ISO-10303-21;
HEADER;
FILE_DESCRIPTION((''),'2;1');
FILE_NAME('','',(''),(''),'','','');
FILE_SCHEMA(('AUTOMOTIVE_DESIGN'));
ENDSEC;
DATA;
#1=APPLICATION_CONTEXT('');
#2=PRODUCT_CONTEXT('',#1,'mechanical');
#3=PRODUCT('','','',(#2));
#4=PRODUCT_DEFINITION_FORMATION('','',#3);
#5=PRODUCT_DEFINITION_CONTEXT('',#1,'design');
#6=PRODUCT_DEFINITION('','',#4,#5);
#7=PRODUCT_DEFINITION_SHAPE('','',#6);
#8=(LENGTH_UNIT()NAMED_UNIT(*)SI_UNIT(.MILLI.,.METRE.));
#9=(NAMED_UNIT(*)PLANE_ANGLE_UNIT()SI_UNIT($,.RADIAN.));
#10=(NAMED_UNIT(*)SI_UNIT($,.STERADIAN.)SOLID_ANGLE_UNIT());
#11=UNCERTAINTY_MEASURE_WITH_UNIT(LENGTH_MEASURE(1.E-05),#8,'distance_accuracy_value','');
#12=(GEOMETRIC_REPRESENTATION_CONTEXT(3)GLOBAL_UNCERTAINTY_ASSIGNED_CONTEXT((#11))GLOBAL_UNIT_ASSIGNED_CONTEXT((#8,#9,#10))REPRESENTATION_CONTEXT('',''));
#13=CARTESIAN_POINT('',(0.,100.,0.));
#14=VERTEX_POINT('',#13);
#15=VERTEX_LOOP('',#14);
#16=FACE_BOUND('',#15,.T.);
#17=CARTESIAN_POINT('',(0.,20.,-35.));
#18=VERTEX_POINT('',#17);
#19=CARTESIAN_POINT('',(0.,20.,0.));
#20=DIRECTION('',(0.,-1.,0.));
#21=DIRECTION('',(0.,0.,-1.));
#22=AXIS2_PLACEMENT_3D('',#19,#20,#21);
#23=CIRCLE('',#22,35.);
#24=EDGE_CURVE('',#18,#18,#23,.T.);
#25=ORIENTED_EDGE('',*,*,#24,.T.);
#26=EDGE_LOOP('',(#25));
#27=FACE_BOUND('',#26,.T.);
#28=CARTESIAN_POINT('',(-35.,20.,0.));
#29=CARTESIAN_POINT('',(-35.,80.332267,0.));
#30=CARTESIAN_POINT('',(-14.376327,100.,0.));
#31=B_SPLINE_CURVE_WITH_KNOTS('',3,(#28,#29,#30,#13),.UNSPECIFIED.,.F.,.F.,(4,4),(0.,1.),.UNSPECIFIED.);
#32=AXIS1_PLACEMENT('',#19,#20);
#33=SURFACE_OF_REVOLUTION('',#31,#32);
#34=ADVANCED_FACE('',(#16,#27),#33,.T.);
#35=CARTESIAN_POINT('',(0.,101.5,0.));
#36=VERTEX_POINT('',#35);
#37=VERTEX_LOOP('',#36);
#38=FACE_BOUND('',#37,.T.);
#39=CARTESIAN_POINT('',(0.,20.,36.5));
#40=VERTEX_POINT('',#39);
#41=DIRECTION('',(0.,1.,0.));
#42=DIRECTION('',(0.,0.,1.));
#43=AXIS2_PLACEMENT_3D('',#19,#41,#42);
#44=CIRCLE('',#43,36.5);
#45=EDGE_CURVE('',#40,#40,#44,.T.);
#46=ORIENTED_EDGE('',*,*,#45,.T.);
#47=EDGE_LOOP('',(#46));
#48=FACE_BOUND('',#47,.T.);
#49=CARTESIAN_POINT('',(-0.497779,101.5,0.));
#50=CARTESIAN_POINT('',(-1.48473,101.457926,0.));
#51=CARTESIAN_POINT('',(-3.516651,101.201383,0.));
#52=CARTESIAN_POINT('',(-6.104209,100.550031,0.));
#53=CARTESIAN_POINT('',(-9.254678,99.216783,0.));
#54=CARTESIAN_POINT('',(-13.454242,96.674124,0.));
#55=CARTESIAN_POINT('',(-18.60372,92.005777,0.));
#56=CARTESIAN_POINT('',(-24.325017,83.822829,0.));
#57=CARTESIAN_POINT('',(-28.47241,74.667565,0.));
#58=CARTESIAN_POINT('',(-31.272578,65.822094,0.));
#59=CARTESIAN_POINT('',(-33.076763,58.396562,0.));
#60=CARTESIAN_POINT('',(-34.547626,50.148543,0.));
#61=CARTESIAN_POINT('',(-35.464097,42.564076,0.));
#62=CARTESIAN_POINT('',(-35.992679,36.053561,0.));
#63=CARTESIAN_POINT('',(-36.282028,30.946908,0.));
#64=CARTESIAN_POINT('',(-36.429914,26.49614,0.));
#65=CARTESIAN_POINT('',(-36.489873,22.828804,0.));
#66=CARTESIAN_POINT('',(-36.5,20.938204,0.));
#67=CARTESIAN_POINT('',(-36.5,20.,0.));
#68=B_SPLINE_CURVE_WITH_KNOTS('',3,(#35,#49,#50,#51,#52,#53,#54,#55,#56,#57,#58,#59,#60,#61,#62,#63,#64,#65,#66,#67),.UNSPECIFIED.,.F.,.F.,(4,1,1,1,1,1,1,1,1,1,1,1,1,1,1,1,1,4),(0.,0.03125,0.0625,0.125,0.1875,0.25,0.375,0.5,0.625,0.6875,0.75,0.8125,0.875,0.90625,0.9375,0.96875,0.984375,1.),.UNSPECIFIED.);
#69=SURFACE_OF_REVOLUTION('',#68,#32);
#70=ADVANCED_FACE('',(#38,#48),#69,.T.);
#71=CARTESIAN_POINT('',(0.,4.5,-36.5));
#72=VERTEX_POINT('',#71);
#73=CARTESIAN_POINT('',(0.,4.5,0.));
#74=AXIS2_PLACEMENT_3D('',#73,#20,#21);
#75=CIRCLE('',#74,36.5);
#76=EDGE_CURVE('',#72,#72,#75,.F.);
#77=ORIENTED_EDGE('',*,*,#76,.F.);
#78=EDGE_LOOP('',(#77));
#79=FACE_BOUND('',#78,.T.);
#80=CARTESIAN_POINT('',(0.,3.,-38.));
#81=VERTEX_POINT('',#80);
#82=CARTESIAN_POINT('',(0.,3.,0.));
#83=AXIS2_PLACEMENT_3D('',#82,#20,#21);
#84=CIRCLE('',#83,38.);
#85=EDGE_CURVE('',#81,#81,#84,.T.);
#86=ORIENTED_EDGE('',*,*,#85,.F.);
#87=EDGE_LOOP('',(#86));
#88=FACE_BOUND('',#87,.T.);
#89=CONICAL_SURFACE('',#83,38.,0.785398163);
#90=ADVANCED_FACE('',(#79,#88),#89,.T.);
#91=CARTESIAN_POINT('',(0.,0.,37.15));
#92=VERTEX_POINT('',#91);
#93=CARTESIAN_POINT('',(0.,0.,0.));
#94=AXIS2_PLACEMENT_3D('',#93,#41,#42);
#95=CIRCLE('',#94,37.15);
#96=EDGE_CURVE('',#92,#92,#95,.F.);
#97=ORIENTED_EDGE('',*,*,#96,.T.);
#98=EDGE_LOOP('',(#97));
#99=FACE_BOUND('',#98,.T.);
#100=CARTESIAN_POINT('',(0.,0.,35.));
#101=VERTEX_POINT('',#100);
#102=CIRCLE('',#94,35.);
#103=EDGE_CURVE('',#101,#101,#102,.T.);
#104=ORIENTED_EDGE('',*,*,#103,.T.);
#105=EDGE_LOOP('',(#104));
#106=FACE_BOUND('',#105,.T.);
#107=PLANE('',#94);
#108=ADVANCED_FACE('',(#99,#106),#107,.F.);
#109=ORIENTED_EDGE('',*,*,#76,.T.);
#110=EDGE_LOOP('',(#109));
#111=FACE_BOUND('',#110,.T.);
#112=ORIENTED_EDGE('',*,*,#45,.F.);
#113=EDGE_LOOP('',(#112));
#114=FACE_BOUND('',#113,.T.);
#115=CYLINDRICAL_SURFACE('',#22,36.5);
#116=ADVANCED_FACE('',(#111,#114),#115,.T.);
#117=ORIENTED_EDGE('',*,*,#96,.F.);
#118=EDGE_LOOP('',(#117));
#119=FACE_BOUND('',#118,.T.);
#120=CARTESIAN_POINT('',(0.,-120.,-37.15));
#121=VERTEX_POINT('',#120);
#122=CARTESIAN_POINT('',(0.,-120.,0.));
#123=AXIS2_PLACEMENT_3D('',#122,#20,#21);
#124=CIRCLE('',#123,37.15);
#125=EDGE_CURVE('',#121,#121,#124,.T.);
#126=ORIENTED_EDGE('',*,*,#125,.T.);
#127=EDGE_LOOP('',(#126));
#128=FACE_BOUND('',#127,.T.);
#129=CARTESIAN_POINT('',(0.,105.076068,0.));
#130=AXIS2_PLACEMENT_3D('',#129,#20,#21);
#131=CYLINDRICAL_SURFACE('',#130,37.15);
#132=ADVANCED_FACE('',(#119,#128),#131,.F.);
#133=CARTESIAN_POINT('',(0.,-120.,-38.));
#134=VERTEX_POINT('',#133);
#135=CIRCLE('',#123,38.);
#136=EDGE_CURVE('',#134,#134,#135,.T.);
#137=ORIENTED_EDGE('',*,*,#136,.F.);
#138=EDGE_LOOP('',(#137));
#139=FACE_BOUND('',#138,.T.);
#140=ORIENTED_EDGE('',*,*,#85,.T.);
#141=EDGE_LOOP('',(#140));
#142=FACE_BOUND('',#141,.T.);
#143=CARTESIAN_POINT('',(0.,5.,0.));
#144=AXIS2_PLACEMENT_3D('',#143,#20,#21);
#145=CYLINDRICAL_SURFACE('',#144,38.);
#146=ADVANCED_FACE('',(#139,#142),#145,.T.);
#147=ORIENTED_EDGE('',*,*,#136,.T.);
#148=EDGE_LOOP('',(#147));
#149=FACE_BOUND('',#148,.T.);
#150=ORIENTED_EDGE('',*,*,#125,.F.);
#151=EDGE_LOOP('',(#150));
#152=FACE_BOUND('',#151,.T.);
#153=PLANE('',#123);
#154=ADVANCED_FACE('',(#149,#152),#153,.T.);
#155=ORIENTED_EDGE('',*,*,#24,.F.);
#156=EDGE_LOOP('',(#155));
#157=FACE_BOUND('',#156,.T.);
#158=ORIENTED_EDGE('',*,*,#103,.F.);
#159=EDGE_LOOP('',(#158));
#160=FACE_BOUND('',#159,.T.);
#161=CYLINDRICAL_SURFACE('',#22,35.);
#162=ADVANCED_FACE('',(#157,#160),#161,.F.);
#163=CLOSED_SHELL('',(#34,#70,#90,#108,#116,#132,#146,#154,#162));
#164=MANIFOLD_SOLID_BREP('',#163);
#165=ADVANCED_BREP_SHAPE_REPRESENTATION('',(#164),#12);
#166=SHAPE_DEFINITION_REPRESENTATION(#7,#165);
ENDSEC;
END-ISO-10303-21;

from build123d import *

# Parameters (mm, degrees)
SKETCH1_R                = 36.5
SKETCH1_R_2              = 35
BOSS_EXTRUDE1_DEPTH      = 20
BOSS_EXTRUDE2_DEPTH      = 120
BOSS_EXTRUDE2_DEPTH_BACK = 5
SKETCH3_R                = 38
SKETCH3_R_2              = 36.5
CHAMFER1_SIZE            = 2
SKETCH4_R                = 37.15
CUT_EXTRUDE1_DEPTH       = 120


with BuildPart() as part:
    # Sketch1 → Boss-Extrude1 (new body)
    with BuildSketch(Plane(origin=(0, 0, 0), x_dir=(1, 0, 0), z_dir=(0, 1, 0))):
        with Locations(Location((0, 0, 0), (0, 0, 270))):
            Circle(SKETCH1_R)
        with Locations(Location((0, 0, 0), (0, 0, 270))):
            Circle(SKETCH1_R_2, mode=Mode.SUBTRACT)
    extrude(amount=BOSS_EXTRUDE1_DEPTH)

    # Sketch2 → Revolve1 (revolve)
    with BuildSketch(Plane.XY, mode=Mode.PRIVATE) as revolve1_sk:
        with BuildLine():
            Line((-35, 20), (-36.5, 20))
            add(Edge.make_bspline(
                [(-36.5, 20), (-36.5, 20.938203754), (-36.489872815, 22.828803886), (-36.429914329, 26.496139533), (-36.282028405, 30.946908345), (-35.992678983, 36.053561075), (-35.464097096, 42.564076378), (-34.547626097, 50.148542942), (-33.076762757, 58.396561812), (-31.272577792, 65.822093819), (-28.472409657, 74.667565146), (-24.325017143, 83.822828988), (-18.603719652, 92.00577673), (-13.454241979, 96.674123666), (-9.254678436, 99.216783088), (-6.104208908, 100.550031186), (-3.516650787, 101.201383216), (-1.484729716, 101.45792619), (-0.497779404, 101.5), (0, 101.5)],
                knots=[0, 0, 0, 0, 0.015625, 0.03125, 0.0625, 0.09375, 0.125, 0.1875, 0.25, 0.3125, 0.375, 0.5, 0.625, 0.75, 0.8125, 0.875, 0.9375, 0.96875, 1, 1, 1, 1], degree=3))
            Line((0, 101.5), (0, 100))
            add(Edge.make_bspline(
                [(-35, 20), (-35, 80.332266649), (-14.376326679, 100), (0, 100)],
                knots=[0, 0, 0, 0, 1, 1, 1, 1], degree=3))
        make_face()
    revolve(revolve1_sk.sketch.rotate(Axis((0, 20, 0), (0, 1, 0)), 270), axis=Axis((0, 20, 0), (0, 1, 0)))

    # Sketch3 → Boss-Extrude2 (add, two sides: drawn at the far end of the back side and taken through both)
    with BuildSketch(Plane.XZ.offset(-BOSS_EXTRUDE2_DEPTH_BACK)):
        with Locations(Location((0, 0, 0), (0, 0, 270))):
            Circle(SKETCH3_R)
        with Locations(Location((0, 0, 0), (0, 0, 270))):
            Circle(SKETCH3_R_2, mode=Mode.SUBTRACT)
    extrude(amount=BOSS_EXTRUDE2_DEPTH + BOSS_EXTRUDE2_DEPTH_BACK)

    # Chamfer1
    # the kernel refuses this chamfer: 2 mm, written as the material it takes off along each edge
    with BuildSketch(Plane(origin=(0, 5, 0), x_dir=(0, 0, -1), z_dir=(-1, 0, 0))) as chamfer1_piece_1_section:
        Polygon((38 - CHAMFER1_SIZE, 0), (38, CHAMFER1_SIZE), (38, 0), align=None)
    chamfer1_piece_1 = revolve(axis=Axis((0, 5, 0), (0, -1, 0)), mode=Mode.PRIVATE)
    chamfer1_piece_1 = chamfer1_piece_1 - Plane(origin=(0, 3.777023611, 0), x_dir=(0, 0, 1), z_dir=(0, -1, 0)) * Cylinder(36.5, 153, mode=Mode.PRIVATE)
    add(chamfer1_piece_1, mode=Mode.SUBTRACT)

    # Sketch4 → Cut-Extrude1 (cut)
    with BuildSketch(Plane.XZ.offset(120)):
        with Locations(Location((0, 0, 0), (0, 0, 270))):
            Circle(SKETCH4_R)
    extrude(amount=-CUT_EXTRUDE1_DEPTH, mode=Mode.SUBTRACT)


solid = part.part
